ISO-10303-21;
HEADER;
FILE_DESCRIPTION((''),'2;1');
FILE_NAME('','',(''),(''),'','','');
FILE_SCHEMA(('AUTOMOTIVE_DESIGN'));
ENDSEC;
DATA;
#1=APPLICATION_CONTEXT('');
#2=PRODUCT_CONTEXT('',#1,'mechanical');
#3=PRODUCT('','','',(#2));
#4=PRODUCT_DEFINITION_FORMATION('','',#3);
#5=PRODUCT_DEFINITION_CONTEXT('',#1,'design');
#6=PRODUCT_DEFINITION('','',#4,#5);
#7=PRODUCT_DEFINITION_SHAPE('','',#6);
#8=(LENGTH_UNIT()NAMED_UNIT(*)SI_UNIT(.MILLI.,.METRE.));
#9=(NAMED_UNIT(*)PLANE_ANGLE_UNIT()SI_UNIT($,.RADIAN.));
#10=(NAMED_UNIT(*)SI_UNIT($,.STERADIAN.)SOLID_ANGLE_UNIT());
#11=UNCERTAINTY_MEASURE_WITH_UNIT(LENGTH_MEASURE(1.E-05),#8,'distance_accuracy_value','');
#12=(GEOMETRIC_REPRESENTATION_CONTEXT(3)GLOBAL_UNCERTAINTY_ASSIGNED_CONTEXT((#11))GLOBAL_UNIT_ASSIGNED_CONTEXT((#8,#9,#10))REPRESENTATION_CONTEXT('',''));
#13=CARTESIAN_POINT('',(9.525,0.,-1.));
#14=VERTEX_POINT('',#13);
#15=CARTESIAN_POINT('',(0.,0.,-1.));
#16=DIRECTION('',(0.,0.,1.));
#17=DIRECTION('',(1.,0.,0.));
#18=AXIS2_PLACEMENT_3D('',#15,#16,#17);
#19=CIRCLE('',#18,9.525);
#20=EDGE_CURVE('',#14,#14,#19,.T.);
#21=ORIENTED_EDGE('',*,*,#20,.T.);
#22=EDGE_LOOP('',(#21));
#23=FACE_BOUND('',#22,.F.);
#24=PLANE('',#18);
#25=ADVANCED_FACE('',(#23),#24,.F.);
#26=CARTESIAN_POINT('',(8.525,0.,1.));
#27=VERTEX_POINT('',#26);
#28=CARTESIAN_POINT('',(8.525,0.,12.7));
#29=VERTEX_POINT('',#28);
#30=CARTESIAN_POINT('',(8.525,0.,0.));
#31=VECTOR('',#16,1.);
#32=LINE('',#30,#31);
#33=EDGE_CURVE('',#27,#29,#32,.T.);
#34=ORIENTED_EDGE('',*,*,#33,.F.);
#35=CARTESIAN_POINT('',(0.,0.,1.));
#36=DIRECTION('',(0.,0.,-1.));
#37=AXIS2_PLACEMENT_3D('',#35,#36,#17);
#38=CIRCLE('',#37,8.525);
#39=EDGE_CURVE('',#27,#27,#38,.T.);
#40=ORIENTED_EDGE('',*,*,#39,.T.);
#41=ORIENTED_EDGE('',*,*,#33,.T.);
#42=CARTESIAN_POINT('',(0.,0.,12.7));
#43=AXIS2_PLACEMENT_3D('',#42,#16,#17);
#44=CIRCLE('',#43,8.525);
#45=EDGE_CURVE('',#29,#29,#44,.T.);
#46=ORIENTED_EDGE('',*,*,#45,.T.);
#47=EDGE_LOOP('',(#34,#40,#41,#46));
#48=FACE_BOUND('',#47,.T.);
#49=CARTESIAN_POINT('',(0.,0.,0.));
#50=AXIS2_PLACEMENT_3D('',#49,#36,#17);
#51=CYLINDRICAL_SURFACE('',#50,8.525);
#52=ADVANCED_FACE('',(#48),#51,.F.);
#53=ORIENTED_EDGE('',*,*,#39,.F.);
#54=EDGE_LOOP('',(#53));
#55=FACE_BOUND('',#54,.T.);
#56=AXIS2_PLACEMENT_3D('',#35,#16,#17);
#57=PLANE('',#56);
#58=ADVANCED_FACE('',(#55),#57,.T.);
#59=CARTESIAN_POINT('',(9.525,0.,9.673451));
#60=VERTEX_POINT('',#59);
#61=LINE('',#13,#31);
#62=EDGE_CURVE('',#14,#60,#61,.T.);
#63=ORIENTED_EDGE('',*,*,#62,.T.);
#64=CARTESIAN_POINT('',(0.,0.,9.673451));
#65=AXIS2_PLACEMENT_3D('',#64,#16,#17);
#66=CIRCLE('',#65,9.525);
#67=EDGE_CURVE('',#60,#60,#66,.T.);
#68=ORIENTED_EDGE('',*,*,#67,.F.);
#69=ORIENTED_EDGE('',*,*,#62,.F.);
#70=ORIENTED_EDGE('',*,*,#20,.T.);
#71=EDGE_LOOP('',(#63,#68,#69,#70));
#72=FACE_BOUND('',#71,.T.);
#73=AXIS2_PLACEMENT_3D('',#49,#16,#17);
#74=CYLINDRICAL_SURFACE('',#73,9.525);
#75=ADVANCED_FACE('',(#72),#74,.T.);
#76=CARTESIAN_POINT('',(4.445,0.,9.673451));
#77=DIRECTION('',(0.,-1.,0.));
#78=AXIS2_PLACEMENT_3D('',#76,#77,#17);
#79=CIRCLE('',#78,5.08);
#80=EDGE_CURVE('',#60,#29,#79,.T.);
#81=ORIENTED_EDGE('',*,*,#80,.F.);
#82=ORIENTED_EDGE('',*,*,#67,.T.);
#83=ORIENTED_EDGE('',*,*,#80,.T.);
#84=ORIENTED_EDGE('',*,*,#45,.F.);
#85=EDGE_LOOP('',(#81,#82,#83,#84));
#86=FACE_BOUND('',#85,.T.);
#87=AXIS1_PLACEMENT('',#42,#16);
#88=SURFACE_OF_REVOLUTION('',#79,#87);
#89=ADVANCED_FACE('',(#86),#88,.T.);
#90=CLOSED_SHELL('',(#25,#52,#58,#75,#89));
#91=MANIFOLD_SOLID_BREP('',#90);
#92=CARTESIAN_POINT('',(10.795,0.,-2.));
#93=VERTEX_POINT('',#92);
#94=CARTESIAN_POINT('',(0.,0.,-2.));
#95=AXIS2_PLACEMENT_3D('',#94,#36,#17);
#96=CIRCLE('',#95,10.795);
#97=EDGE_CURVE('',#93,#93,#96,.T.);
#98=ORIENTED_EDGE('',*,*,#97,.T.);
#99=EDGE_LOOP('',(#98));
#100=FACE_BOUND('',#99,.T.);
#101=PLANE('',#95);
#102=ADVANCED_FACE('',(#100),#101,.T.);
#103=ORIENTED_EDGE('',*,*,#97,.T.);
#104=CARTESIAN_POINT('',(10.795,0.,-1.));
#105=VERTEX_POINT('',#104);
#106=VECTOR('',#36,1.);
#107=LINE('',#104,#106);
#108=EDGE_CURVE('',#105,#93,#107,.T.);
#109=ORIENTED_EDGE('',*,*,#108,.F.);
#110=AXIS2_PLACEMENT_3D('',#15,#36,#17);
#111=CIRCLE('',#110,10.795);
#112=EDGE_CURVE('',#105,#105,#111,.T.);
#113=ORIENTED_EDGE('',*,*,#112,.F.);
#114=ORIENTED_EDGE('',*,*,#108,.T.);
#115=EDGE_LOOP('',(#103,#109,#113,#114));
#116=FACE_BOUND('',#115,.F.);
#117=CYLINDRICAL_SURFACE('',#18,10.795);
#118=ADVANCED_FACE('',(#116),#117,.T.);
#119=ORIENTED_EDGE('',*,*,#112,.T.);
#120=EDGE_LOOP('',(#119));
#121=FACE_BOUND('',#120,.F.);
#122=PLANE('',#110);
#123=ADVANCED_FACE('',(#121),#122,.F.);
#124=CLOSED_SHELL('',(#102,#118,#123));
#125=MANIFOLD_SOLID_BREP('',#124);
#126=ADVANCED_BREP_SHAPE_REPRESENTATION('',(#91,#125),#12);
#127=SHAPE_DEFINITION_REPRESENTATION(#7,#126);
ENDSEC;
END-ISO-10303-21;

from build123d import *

# Parameters (mm, degrees)
F0_R     = 9.525
F1_DEPTH = 12.7
F2_T     = -1
F3_DEPTH = 1
F4_R     = 10.795
F4_R_2   = 9.525
F5_DEPTH = 1


# Not quite as in the source:
# - a fillet or chamfer that OpenCascade refuses, or shapes differently, is made with other operations: its cross-section is extruded or revolved along the edge and cut away or added


with BuildPart() as f1:
    # F0 (on Top) → F1 (new body)
    with BuildSketch(Plane.XY):
        Circle(F0_R)
    extrude(amount=F1_DEPTH)

    # F2
    f2_openings = [f1.faces().sort_by_distance(p)[0] for p in [
        (0, 0, 12.7),
    ]]
    offset(amount=F2_T, openings=f2_openings)

    # F3 (add): a face of the model
    f3_faces = [f1.faces().sort_by_distance(p)[0] for p in [
        (0, 0, 0),
    ]]
    extrude(f3_faces, amount=F3_DEPTH)

    # F6: fillet of radius 5.08 on 1 edges, made by hand

    # F6_s1 → F6_t2 (revolve, cut)
    with BuildSketch(Plane.XZ):
        with BuildLine():
            ThreePointArc((9.525, 9.6734508099), (9.2685256815, 11.267188555), (8.525, 12.7))
            Line((8.525, 12.7), (9.525, 12.7))
            Line((9.525, 12.7), (9.525, 9.6734508099))
        make_face()
    revolve(axis=Axis((0, 0, 12.7), (0, 0, 1)), mode=Mode.SUBTRACT)


with BuildPart() as f5:
    # F4 (on face) → F5 (new body)
    with BuildSketch(Plane(origin=(0, 0, -1), x_dir=(1, 0, 0), z_dir=(0, 0, -1))):
        Circle(F4_R)
        Circle(F4_R_2, mode=Mode.SUBTRACT)
        Circle(F4_R_2)
    extrude(amount=F5_DEPTH)


solid = Compound([f1.part, f5.part])
